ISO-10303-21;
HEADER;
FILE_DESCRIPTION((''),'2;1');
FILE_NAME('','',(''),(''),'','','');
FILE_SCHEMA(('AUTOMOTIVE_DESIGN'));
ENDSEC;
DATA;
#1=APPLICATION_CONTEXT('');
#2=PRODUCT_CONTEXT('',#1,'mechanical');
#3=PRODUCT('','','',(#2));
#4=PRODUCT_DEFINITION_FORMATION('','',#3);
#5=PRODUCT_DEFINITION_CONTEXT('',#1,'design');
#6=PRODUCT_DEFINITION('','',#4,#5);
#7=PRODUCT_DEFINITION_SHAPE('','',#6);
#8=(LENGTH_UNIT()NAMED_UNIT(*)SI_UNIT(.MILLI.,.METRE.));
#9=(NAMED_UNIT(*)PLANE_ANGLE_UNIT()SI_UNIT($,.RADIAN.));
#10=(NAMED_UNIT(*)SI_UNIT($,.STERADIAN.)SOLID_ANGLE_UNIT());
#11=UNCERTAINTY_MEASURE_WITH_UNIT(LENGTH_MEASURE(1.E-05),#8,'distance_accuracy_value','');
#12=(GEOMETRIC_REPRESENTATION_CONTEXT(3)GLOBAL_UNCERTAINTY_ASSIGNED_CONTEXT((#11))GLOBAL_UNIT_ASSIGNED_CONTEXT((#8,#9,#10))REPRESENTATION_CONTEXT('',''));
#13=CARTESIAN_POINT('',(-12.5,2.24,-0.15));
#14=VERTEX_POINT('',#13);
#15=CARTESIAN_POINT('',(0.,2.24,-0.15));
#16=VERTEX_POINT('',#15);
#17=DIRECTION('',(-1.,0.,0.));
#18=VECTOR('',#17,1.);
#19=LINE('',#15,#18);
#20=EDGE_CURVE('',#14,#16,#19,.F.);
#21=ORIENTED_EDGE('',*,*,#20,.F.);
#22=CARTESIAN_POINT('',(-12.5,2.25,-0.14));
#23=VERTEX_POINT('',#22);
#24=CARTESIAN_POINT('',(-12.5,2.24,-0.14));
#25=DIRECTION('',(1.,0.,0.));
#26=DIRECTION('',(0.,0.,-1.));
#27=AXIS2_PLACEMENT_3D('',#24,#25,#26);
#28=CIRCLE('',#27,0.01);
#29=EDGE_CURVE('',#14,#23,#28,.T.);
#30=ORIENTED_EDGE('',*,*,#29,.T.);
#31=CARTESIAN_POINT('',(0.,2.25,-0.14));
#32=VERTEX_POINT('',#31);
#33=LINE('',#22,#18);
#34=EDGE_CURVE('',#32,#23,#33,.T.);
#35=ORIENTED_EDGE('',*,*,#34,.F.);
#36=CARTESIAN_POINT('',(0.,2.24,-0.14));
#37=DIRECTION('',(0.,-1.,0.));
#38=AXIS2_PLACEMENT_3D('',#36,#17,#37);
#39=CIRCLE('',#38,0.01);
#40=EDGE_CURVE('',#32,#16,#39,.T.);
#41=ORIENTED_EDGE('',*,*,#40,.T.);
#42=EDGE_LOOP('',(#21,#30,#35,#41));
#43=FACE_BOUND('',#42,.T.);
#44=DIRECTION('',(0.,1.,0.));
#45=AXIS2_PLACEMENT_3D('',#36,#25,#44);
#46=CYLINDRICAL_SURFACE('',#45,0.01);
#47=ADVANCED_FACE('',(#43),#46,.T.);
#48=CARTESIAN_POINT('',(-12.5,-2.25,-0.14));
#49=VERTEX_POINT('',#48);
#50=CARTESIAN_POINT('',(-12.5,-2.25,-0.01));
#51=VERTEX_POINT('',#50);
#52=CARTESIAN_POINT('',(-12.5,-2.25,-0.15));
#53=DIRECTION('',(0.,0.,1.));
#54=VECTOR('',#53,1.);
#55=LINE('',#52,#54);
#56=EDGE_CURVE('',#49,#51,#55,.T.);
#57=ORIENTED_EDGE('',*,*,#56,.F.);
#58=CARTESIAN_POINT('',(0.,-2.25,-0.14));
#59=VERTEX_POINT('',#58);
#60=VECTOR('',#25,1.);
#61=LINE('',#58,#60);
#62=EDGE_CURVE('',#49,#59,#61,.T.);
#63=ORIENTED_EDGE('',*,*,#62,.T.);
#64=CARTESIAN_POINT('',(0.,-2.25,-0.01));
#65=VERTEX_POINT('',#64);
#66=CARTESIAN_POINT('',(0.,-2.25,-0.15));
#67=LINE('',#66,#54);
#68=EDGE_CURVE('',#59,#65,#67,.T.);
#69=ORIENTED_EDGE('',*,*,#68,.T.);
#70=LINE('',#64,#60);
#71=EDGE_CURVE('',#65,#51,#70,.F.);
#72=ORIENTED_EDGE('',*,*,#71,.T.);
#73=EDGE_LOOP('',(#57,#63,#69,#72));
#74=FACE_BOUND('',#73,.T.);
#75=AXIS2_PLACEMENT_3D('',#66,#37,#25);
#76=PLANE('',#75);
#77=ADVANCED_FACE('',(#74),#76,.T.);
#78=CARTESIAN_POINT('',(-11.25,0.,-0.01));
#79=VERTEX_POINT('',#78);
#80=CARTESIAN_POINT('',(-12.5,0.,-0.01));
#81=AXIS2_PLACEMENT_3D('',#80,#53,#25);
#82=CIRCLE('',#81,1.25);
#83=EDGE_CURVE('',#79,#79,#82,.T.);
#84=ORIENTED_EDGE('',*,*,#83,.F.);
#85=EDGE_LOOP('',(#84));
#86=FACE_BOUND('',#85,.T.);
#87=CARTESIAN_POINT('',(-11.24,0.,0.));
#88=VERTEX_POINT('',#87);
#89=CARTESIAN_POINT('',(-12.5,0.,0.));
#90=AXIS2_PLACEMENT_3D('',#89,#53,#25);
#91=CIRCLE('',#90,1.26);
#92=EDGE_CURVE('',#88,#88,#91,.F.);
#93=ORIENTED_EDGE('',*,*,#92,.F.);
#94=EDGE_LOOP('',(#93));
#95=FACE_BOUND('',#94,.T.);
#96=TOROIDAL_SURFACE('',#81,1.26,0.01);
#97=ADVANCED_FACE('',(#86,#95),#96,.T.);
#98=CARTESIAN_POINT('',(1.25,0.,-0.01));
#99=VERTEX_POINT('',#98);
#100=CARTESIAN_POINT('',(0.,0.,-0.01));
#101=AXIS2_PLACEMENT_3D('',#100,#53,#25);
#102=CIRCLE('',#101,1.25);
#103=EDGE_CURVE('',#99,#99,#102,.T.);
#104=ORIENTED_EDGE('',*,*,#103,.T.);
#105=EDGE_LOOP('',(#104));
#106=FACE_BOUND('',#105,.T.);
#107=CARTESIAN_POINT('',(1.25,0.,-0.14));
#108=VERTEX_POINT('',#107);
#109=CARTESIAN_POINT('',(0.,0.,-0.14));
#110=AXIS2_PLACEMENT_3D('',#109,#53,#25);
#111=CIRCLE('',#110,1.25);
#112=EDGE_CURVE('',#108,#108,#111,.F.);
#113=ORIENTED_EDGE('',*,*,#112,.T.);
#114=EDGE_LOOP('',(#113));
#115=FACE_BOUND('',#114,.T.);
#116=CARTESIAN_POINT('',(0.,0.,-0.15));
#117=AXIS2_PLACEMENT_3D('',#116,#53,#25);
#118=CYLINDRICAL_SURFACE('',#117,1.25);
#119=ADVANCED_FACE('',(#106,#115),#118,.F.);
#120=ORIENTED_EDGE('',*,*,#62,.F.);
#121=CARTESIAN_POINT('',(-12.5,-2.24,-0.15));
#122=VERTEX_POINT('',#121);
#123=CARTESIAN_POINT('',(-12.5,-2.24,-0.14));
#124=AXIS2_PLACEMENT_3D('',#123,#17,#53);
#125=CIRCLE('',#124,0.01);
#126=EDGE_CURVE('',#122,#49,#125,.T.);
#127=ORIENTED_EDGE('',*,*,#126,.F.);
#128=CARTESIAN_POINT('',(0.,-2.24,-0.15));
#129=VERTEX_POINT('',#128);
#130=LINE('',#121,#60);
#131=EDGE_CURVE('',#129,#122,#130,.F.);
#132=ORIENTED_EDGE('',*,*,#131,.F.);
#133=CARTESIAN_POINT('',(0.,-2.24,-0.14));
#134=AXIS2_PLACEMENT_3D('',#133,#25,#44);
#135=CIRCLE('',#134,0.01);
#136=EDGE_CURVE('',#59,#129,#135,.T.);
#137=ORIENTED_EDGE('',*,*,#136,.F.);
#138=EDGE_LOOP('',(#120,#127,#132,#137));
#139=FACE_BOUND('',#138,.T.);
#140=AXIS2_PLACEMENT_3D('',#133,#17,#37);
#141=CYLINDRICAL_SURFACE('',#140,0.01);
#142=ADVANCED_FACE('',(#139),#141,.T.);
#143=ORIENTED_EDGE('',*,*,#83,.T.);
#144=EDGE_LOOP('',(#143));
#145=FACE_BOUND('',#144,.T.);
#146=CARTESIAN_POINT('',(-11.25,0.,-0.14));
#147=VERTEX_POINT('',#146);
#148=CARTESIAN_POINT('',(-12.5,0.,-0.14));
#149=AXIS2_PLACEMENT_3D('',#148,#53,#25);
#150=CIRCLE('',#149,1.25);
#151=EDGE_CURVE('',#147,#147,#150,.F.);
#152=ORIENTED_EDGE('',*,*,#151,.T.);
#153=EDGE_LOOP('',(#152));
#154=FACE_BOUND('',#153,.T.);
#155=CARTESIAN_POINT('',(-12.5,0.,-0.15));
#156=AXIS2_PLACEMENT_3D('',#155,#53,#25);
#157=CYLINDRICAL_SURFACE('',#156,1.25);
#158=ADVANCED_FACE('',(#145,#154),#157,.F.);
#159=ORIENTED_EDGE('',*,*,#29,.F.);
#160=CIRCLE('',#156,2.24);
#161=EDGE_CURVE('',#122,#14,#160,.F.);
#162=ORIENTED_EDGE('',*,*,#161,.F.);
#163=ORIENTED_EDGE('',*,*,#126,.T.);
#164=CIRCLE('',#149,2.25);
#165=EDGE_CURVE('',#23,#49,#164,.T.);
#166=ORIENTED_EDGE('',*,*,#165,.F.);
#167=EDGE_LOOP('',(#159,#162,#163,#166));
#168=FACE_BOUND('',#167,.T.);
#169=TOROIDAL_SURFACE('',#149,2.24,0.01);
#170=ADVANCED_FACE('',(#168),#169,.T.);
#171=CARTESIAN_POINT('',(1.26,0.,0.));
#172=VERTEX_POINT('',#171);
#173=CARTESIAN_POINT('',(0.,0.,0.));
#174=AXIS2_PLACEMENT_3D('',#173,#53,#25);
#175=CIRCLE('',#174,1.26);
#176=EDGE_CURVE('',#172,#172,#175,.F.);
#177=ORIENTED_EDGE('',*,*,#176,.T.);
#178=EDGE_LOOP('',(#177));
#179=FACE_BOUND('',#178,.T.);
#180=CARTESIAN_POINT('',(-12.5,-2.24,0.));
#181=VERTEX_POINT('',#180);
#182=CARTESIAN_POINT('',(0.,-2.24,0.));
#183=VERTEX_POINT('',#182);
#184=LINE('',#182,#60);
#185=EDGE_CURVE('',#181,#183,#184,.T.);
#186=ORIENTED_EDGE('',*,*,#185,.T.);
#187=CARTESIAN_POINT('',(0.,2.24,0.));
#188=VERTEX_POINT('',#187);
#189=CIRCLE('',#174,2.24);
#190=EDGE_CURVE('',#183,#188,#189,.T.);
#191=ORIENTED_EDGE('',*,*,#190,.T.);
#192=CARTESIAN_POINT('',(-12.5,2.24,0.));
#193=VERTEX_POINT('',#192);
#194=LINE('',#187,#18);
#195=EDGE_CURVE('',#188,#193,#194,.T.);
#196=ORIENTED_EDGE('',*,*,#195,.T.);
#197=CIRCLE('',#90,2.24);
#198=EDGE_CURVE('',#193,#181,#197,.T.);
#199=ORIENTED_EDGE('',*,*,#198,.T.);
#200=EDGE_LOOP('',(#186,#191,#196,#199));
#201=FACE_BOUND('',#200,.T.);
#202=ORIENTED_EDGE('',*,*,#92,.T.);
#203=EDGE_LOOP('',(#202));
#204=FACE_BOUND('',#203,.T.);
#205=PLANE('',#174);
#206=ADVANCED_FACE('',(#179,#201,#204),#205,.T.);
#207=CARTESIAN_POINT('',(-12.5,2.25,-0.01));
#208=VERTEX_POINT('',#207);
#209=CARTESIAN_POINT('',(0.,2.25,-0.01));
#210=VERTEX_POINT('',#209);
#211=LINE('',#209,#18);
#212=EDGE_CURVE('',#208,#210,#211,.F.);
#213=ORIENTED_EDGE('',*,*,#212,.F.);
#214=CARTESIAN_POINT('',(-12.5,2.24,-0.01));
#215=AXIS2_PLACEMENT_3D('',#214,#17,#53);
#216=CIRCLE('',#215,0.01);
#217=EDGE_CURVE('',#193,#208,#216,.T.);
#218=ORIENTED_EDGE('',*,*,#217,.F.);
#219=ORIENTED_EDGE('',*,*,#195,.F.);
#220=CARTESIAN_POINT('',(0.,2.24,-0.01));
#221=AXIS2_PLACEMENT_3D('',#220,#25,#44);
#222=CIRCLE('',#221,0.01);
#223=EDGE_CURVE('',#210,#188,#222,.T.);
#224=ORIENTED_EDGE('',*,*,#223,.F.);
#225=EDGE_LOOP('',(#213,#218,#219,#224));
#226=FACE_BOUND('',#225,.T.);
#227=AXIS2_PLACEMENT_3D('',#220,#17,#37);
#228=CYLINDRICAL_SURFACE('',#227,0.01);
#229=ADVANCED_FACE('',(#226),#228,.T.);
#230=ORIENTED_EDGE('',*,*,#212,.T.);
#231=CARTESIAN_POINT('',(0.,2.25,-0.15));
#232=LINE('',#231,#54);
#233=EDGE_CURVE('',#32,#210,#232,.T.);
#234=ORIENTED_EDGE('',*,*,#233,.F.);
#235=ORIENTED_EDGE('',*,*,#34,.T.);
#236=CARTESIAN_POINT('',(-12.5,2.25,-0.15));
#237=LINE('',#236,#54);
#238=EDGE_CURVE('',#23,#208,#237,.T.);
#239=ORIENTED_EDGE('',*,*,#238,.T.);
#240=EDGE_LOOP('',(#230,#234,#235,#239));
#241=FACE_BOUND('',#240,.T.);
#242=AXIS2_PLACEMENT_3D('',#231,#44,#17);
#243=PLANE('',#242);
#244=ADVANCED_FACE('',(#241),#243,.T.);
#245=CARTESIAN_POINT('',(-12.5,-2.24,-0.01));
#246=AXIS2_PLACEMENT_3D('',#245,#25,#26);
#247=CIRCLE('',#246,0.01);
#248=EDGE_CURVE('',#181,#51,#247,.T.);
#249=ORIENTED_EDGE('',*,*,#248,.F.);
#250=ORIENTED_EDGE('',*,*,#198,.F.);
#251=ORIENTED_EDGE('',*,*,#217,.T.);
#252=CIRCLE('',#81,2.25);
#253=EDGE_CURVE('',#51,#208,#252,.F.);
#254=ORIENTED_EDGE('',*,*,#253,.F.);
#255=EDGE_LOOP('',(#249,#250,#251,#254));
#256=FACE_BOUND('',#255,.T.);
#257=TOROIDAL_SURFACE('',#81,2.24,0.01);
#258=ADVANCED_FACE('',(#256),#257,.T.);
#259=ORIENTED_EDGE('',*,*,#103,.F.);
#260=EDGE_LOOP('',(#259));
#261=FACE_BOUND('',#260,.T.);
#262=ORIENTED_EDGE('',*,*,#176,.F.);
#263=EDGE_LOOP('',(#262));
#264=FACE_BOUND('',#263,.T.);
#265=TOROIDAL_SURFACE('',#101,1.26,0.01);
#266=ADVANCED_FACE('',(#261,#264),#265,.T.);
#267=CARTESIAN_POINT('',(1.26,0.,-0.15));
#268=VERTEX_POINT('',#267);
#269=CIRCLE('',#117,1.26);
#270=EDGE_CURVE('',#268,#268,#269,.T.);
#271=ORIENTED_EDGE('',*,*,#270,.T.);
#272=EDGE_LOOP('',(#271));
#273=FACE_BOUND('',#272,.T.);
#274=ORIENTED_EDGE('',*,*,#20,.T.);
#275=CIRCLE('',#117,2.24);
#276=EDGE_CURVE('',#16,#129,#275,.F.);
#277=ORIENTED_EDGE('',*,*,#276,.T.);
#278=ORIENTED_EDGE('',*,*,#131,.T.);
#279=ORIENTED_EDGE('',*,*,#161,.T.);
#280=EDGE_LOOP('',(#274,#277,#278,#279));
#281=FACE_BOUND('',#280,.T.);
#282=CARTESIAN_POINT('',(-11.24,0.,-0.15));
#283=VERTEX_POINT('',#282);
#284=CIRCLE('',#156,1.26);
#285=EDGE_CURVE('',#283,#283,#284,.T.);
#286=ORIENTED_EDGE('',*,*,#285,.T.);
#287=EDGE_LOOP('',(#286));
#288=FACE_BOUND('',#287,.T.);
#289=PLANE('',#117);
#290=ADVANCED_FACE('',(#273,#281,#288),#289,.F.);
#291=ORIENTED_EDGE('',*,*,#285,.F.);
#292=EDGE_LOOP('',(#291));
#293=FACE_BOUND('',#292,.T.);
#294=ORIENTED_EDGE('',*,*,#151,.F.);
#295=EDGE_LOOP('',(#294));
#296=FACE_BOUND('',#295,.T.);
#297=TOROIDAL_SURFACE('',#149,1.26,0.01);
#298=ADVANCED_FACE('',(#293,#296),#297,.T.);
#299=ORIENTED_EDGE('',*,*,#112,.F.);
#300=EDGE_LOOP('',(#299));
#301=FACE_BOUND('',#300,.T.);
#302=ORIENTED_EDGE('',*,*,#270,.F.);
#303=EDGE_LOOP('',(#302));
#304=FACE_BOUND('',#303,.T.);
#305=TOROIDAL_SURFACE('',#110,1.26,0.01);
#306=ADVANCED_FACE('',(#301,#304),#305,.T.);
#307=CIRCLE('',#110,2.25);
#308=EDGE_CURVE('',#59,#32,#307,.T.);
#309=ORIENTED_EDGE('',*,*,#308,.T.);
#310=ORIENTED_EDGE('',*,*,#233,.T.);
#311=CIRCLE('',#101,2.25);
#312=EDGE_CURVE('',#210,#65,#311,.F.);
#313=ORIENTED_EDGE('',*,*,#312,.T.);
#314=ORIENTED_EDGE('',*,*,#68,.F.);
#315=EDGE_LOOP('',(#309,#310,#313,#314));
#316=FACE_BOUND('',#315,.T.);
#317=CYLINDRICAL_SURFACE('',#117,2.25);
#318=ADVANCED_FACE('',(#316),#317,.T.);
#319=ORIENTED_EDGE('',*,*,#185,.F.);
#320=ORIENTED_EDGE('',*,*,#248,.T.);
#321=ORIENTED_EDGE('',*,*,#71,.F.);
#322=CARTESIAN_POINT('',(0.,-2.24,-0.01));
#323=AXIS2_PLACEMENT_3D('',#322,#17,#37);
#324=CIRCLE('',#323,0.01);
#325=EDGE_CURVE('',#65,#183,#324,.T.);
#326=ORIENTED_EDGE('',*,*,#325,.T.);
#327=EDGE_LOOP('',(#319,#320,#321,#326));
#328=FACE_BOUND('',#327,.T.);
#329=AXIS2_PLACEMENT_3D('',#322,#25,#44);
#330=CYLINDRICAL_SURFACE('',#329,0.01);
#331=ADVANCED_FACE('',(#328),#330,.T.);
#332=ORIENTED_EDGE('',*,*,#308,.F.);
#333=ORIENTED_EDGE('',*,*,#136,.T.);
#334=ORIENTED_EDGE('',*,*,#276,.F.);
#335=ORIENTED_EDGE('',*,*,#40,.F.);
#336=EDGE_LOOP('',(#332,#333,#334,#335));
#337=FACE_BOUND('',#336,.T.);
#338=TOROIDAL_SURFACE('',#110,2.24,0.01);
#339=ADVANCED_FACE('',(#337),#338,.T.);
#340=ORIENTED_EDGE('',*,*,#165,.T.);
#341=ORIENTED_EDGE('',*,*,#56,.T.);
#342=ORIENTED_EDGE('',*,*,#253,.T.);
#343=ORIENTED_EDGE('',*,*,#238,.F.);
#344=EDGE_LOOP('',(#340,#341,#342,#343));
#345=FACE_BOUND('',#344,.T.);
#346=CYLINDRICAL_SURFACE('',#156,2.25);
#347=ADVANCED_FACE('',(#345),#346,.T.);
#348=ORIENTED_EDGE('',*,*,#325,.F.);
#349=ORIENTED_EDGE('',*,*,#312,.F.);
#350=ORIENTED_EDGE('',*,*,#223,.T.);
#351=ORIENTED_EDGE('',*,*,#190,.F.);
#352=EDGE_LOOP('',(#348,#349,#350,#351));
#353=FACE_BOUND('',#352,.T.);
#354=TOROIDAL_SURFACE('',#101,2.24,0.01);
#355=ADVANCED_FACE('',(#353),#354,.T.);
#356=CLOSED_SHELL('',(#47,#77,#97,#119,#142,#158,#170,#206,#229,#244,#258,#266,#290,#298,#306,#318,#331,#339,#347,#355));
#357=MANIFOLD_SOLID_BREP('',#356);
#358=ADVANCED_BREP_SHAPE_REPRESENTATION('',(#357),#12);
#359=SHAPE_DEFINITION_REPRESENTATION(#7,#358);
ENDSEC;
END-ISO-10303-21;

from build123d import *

# Parameters (mm, degrees)
SKETCH1_R          = 1.25
BASE_FLANGE1_DEPTH = 0.15
FILLET1_R          = 0.01


# Sheet-metal steps are written as plain solids
with BuildPart() as part:
    # Sketch1 → Base-Flange1 (new body)
    with BuildSketch(Plane.XY):
        with BuildLine():
            Line((0, -2.25), (-12.5, -2.25))
            ThreePointArc((-12.5, -2.25), (-14.75, 0), (-12.5, 2.25))
            Line((-12.5, 2.25), (0, 2.25))
            ThreePointArc((0, 2.25), (2.25, 0), (0, -2.25))
        make_face()
        with Locations((-12.5, 0)):
            Circle(SKETCH1_R, mode=Mode.SUBTRACT)
        Circle(SKETCH1_R, mode=Mode.SUBTRACT)
    extrude(amount=-BASE_FLANGE1_DEPTH)

    # Fillet1
    fillet1_edges = [part.edges().sort_by_distance(p)[0] for p in [
        (-14.75, 0, -0.15),
        (-13.75, 0, -0.15),
        (-13.75, 0, 0),
        (-6.25, -2.25, -0.15),
        (-1.25, 0, -0.15),
        (-1.25, 0, 0),
        (2.25, 0, -0.15),
        (-6.25, -2.25, 0),
        (-14.75, 0, 0),
        (-6.25, 2.25, 0),
        (2.25, 0, 0),
        (-6.25, 2.25, -0.15),
    ]]
    fillet(fillet1_edges, radius=FILLET1_R)


solid = part.part
